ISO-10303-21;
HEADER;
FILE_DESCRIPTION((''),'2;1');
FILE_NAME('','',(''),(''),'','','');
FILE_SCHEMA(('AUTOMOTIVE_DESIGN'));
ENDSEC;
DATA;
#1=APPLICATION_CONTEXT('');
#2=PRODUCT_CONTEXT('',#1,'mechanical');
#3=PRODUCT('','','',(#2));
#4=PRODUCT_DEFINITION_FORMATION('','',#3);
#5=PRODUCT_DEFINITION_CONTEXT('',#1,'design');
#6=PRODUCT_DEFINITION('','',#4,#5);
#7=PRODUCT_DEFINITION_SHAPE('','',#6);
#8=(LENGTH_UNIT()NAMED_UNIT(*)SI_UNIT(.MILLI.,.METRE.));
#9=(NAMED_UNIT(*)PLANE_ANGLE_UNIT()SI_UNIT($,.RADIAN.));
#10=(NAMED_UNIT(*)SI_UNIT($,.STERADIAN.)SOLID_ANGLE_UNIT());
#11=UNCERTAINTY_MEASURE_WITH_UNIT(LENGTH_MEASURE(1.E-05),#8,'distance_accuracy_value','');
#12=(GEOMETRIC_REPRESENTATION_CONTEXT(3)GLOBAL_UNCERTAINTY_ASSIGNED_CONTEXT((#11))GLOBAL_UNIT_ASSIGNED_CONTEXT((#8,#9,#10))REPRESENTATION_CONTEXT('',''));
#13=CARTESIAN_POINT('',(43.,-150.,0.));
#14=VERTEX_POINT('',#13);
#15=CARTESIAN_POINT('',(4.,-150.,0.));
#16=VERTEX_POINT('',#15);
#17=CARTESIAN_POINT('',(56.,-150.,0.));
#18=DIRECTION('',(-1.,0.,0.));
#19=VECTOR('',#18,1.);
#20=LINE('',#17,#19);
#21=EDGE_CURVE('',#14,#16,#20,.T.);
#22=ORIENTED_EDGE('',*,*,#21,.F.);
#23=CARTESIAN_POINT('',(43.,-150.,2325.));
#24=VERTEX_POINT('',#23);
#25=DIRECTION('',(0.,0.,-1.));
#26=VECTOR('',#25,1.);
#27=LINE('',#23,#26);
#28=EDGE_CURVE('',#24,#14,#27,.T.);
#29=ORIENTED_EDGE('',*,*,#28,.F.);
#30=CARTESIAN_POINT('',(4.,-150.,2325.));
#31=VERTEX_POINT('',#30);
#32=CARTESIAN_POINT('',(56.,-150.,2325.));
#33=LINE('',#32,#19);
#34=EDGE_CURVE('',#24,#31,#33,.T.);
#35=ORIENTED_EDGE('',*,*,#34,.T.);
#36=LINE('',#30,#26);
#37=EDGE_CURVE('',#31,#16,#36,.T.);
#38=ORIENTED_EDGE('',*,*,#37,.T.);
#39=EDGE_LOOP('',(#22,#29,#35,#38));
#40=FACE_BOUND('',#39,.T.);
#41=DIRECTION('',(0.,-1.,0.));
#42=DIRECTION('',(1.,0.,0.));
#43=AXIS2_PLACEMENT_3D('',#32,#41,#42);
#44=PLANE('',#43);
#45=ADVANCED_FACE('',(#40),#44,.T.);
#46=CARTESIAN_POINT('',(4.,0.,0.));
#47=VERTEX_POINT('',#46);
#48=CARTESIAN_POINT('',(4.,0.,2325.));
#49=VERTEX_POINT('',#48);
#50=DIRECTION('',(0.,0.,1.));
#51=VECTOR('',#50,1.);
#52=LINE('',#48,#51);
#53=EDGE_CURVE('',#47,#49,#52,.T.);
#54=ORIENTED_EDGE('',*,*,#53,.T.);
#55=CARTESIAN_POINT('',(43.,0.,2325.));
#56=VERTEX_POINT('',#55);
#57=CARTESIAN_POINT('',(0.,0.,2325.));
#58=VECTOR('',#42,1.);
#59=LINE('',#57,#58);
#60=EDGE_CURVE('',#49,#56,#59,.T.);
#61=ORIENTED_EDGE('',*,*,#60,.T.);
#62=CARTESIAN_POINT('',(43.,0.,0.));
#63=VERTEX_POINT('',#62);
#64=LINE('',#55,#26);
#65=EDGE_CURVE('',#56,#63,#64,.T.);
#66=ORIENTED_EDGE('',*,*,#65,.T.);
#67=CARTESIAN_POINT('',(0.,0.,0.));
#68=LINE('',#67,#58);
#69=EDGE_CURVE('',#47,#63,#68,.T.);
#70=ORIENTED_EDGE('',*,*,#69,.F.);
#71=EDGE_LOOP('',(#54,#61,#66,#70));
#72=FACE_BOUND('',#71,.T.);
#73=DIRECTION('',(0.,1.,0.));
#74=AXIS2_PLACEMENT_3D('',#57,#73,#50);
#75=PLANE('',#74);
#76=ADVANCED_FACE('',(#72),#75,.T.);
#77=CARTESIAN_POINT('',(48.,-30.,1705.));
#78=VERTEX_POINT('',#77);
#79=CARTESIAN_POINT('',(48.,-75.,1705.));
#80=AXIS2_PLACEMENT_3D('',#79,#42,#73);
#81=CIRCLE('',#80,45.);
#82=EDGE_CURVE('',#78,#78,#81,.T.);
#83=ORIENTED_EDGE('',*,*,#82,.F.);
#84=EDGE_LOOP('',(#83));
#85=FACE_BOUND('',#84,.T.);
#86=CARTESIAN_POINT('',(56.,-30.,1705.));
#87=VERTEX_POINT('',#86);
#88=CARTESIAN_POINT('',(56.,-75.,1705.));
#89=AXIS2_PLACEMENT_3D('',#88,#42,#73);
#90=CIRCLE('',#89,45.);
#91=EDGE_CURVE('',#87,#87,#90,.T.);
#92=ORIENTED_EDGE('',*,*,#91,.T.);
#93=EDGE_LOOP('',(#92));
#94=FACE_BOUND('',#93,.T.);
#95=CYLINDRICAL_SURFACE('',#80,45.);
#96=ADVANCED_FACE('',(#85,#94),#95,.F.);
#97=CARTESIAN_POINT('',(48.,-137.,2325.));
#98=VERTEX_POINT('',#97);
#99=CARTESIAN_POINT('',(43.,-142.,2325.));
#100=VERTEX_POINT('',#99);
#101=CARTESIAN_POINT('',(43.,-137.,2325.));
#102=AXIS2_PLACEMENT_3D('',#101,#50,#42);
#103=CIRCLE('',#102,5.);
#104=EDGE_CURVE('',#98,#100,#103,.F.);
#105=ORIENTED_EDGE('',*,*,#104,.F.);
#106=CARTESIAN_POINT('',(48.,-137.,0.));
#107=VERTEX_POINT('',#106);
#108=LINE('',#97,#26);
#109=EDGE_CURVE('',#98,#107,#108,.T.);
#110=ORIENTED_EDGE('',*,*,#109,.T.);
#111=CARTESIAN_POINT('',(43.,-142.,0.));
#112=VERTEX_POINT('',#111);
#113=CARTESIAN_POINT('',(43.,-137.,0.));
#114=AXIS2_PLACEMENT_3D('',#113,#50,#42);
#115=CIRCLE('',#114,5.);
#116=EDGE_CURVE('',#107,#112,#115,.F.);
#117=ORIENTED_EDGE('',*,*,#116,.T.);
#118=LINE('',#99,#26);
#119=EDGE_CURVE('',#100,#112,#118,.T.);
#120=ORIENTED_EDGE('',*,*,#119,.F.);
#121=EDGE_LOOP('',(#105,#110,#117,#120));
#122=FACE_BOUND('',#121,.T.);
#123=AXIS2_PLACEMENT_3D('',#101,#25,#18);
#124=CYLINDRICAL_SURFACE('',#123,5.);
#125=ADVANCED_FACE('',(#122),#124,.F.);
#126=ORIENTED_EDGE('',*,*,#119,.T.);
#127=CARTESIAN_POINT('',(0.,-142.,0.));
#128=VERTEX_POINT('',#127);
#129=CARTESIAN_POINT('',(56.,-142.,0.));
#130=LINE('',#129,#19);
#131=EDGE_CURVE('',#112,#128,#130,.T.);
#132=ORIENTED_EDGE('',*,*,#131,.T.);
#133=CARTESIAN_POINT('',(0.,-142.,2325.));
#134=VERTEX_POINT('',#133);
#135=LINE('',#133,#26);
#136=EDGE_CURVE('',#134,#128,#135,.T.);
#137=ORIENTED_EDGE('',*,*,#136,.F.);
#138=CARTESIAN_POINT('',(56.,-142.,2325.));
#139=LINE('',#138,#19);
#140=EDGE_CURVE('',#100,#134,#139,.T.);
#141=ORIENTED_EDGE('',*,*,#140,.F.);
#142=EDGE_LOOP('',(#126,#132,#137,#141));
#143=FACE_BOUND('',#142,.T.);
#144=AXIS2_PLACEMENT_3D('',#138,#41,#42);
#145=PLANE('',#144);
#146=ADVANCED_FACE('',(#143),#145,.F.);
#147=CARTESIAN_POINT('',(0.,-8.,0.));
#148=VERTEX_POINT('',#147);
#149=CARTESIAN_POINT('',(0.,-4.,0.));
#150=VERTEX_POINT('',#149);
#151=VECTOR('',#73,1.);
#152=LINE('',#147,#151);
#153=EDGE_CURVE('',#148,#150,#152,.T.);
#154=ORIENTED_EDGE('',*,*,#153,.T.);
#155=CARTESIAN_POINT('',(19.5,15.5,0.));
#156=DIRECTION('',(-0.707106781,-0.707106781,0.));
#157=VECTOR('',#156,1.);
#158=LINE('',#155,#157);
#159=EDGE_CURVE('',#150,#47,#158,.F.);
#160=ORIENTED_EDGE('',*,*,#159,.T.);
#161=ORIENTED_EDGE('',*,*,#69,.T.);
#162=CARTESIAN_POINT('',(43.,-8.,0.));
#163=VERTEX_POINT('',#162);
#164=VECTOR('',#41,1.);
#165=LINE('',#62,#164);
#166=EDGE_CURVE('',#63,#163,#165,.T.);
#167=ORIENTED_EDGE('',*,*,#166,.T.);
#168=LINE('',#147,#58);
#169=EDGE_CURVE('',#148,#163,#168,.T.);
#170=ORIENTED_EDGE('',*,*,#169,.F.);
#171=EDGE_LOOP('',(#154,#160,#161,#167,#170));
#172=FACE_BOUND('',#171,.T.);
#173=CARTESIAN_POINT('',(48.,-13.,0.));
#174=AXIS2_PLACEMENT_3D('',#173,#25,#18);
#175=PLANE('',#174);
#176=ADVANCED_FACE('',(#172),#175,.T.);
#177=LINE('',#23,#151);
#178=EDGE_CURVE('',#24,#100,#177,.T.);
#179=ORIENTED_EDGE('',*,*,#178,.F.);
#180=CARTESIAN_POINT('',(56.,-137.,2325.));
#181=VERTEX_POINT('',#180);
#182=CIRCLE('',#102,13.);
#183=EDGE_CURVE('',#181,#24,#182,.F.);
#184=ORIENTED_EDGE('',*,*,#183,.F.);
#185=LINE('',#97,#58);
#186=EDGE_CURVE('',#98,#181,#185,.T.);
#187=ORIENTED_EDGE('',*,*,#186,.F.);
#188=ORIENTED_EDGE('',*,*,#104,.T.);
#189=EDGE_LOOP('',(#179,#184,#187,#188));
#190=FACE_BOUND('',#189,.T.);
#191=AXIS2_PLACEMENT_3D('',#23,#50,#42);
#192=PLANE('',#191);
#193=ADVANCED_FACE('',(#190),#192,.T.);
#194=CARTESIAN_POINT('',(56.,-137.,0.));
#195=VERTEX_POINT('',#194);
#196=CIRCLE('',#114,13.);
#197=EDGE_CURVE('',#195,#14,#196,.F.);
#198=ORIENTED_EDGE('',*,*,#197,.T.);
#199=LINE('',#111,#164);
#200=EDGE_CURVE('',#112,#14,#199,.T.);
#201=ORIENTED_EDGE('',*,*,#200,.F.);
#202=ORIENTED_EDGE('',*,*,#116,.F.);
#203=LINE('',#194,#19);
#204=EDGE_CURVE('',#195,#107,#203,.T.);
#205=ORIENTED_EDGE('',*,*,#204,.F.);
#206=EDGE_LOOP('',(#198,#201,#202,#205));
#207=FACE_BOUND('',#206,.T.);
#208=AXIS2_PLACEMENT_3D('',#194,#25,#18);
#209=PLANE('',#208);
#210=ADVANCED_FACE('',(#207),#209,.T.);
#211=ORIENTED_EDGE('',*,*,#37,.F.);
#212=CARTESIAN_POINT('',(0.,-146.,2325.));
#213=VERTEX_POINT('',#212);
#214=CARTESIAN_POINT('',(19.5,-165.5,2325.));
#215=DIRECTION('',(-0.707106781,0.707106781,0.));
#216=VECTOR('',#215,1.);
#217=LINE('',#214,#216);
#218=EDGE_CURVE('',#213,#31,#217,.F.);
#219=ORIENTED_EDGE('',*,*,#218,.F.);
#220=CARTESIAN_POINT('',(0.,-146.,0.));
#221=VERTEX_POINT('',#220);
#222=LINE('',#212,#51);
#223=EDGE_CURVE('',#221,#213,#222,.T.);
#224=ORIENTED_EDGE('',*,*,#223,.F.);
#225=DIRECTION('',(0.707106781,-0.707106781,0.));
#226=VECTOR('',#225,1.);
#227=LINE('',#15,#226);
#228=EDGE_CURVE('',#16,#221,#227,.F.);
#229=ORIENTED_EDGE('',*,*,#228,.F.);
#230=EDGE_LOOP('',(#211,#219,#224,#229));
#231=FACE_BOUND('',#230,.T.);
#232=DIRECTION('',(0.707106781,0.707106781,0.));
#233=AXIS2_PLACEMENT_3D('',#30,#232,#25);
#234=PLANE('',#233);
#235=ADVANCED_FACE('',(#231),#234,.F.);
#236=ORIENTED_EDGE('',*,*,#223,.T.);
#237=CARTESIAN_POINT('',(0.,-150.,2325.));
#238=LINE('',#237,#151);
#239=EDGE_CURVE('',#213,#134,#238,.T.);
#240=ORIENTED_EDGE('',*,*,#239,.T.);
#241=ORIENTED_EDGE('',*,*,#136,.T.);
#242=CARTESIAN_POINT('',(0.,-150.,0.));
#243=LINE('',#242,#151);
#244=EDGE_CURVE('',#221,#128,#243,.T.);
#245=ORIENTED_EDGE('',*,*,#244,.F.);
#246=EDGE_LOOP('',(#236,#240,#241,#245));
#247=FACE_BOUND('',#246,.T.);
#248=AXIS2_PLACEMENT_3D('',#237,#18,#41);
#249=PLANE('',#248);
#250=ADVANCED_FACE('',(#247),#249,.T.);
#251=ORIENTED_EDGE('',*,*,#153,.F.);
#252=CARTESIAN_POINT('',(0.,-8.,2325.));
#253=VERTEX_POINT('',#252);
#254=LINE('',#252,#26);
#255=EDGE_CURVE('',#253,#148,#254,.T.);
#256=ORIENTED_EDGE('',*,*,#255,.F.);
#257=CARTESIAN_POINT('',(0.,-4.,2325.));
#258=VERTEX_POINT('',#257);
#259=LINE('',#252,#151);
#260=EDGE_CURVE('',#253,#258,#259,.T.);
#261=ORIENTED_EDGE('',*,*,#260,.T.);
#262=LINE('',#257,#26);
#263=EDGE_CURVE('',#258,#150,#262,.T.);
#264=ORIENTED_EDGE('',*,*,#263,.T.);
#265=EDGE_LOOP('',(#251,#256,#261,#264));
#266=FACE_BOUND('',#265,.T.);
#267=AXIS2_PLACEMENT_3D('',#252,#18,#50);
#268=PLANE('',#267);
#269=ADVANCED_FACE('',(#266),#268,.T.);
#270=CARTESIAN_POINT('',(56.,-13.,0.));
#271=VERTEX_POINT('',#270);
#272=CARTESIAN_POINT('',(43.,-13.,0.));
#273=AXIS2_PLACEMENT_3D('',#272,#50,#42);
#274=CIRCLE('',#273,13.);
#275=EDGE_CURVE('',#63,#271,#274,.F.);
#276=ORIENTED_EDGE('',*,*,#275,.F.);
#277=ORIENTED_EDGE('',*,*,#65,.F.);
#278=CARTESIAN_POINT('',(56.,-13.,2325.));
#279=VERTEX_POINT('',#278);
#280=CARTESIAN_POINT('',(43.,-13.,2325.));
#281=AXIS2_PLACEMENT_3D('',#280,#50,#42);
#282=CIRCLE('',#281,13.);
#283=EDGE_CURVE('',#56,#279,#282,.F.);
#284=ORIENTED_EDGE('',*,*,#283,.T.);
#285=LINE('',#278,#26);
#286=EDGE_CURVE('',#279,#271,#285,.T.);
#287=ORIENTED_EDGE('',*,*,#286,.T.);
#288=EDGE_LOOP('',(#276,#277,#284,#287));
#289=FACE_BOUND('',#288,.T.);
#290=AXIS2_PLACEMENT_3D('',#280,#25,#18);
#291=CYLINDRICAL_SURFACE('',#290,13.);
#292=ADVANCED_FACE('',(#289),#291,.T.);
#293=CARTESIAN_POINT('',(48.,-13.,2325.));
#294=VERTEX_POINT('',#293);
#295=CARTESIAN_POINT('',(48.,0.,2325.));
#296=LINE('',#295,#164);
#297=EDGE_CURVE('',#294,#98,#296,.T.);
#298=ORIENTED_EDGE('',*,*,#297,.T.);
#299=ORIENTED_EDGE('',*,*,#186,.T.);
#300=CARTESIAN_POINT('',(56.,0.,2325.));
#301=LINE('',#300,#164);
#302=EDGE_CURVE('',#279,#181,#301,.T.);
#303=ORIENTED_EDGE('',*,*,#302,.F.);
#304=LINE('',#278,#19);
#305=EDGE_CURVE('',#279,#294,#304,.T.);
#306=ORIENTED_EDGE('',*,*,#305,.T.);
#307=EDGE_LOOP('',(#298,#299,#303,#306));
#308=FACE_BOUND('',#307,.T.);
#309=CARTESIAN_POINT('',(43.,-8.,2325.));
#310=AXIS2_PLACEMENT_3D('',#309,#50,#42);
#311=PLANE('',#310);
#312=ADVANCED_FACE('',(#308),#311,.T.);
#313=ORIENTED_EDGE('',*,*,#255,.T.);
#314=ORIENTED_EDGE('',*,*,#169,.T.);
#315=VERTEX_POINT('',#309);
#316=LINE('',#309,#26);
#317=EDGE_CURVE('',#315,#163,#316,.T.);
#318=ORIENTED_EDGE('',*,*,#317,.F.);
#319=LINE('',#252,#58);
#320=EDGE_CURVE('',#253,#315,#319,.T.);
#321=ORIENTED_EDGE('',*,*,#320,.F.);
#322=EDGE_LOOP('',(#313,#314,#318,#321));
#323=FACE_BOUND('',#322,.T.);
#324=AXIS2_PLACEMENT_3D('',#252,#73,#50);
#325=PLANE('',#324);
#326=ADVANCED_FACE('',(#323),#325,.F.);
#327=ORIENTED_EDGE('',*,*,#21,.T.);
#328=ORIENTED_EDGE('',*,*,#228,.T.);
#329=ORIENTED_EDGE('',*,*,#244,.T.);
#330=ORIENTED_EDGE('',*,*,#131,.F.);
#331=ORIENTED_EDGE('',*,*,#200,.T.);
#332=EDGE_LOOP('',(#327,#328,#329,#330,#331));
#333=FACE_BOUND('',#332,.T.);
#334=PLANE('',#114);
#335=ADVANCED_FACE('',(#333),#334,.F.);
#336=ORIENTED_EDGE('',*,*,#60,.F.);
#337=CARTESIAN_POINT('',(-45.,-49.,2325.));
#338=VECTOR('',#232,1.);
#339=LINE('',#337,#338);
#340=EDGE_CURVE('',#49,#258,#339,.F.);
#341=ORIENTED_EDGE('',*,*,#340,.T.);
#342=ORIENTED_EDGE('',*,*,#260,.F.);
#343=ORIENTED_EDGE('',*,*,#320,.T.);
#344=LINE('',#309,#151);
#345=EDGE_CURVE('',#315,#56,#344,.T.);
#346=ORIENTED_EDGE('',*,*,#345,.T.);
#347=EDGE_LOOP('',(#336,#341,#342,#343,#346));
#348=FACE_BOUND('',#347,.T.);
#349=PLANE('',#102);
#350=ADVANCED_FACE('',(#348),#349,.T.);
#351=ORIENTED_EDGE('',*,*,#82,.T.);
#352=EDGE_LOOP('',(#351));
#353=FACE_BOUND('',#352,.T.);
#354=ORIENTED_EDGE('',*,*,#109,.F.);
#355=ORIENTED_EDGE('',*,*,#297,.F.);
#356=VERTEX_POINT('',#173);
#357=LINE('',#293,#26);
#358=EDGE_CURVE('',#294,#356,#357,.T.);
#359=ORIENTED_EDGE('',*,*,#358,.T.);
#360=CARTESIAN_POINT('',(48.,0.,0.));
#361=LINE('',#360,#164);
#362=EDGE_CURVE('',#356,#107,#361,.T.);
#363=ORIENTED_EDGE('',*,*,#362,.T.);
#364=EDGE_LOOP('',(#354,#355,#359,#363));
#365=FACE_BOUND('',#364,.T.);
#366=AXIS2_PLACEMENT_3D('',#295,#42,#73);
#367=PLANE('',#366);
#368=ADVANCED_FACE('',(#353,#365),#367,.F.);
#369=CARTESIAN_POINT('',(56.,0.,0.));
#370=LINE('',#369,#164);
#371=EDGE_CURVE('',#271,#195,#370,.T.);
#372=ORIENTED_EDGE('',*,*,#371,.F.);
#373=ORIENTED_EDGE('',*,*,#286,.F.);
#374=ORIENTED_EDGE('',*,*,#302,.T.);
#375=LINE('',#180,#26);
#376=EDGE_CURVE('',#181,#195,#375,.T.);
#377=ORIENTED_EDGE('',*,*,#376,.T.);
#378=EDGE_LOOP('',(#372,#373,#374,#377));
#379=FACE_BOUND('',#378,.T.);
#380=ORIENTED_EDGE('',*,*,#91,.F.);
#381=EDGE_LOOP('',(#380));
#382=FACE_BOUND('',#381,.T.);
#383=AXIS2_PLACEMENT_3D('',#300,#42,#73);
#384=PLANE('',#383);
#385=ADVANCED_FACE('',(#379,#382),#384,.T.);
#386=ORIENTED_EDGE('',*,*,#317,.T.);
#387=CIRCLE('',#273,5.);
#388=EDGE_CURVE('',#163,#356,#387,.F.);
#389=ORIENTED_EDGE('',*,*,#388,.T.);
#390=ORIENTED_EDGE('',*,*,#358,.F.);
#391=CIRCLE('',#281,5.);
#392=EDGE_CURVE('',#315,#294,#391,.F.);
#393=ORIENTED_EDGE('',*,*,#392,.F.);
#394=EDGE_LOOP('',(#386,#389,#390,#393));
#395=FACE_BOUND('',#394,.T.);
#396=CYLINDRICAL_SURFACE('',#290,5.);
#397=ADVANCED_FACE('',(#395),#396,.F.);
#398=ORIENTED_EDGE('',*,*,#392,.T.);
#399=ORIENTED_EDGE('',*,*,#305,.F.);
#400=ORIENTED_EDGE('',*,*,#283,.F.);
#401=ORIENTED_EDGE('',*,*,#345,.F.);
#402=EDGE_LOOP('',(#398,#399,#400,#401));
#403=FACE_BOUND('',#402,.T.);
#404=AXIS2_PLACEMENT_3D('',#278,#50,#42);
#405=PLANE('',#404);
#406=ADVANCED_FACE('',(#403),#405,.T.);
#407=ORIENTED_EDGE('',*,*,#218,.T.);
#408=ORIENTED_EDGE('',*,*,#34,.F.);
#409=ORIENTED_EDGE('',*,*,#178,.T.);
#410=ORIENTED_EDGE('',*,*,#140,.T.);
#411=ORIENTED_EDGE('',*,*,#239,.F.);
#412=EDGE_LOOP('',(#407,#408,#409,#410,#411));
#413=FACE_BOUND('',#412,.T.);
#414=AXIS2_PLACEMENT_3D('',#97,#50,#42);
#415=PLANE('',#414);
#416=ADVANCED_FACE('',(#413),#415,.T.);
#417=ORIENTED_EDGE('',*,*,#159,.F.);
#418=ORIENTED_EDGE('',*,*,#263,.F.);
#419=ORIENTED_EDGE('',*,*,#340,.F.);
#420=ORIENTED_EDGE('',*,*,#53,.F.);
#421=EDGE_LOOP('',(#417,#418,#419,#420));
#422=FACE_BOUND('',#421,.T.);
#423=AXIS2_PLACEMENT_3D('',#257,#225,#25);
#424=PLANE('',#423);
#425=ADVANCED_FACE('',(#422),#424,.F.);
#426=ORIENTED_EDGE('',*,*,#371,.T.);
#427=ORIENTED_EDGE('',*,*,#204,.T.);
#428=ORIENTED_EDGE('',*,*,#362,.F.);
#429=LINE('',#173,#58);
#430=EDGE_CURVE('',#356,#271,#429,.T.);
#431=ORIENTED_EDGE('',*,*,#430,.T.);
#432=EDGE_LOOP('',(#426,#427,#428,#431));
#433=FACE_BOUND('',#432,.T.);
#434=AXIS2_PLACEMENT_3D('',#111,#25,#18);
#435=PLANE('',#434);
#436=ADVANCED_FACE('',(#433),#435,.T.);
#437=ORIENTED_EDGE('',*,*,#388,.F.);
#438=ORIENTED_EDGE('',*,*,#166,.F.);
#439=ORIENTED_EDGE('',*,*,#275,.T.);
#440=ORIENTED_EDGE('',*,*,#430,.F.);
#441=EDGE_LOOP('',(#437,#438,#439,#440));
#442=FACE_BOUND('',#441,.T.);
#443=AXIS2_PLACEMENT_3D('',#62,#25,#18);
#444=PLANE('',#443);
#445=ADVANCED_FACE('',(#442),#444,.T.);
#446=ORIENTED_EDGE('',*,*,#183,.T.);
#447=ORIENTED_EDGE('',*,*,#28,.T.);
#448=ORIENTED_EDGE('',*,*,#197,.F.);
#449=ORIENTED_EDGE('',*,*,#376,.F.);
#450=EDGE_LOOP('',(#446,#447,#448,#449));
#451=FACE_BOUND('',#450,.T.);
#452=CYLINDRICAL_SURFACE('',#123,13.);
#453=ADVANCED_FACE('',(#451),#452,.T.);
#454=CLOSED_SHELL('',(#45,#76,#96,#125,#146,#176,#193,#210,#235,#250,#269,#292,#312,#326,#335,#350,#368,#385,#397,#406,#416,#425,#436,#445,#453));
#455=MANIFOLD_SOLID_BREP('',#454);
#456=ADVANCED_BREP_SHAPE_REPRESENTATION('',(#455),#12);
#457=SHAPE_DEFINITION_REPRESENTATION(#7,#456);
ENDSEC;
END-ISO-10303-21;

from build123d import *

# Parameters (mm, degrees)
SM_BASE_FLANGE_1_DEPTH = 2325
SKETCH_6_R             = 45
CUT_EXTRUDE_1_DEPTH    = 10
CHAMFER_2_SIZE         = 4


# Sheet-metal steps are written as plain solids
with BuildPart() as part:
    # Sketch 1 → 基体-法兰1 (new body)
    with BuildSketch(Plane.XY):
        with BuildLine():
            Line((0, 0), (43, 0))
            ThreePointArc((43, 0), (52.192388155, -3.807611845), (56, -13))
            Line((56, -13), (56, -137))
            ThreePointArc((56, -137), (52.192388155, -146.192388155), (43, -150))
            Line((43, -150), (0, -150))
            Line((0, -150), (0, -142))
            Line((0, -142), (43, -142))
            ThreePointArc((43, -142), (46.535533906, -140.535533906), (48, -137))
            Line((48, -137), (48, -13))
            ThreePointArc((48, -13), (46.535533906, -9.464466094), (43, -8))
            Line((43, -8), (0, -8))
            Line((0, -8), (0, 0))
        make_face()
    extrude(amount=SM_BASE_FLANGE_1_DEPTH)

    # 草图6 → 切除-拉伸1 (cut)
    with BuildSketch(Plane(origin=(56, 0, 0), x_dir=(0, 0, -1), z_dir=(1, 0, 0))):
        with Locations(Location((-1705, -75, 0), (0, 0, 90))):
            Circle(SKETCH_6_R)
    extrude(amount=-CUT_EXTRUDE_1_DEPTH, mode=Mode.SUBTRACT)

    # 倒角2
    chamfer_2_edges = [part.edges().sort_by_distance(p)[0] for p in [
        (0, 0, 1162.5),
        (0, -150, 1162.5),
    ]]
    chamfer(chamfer_2_edges, length=CHAMFER_2_SIZE)


solid = part.part
